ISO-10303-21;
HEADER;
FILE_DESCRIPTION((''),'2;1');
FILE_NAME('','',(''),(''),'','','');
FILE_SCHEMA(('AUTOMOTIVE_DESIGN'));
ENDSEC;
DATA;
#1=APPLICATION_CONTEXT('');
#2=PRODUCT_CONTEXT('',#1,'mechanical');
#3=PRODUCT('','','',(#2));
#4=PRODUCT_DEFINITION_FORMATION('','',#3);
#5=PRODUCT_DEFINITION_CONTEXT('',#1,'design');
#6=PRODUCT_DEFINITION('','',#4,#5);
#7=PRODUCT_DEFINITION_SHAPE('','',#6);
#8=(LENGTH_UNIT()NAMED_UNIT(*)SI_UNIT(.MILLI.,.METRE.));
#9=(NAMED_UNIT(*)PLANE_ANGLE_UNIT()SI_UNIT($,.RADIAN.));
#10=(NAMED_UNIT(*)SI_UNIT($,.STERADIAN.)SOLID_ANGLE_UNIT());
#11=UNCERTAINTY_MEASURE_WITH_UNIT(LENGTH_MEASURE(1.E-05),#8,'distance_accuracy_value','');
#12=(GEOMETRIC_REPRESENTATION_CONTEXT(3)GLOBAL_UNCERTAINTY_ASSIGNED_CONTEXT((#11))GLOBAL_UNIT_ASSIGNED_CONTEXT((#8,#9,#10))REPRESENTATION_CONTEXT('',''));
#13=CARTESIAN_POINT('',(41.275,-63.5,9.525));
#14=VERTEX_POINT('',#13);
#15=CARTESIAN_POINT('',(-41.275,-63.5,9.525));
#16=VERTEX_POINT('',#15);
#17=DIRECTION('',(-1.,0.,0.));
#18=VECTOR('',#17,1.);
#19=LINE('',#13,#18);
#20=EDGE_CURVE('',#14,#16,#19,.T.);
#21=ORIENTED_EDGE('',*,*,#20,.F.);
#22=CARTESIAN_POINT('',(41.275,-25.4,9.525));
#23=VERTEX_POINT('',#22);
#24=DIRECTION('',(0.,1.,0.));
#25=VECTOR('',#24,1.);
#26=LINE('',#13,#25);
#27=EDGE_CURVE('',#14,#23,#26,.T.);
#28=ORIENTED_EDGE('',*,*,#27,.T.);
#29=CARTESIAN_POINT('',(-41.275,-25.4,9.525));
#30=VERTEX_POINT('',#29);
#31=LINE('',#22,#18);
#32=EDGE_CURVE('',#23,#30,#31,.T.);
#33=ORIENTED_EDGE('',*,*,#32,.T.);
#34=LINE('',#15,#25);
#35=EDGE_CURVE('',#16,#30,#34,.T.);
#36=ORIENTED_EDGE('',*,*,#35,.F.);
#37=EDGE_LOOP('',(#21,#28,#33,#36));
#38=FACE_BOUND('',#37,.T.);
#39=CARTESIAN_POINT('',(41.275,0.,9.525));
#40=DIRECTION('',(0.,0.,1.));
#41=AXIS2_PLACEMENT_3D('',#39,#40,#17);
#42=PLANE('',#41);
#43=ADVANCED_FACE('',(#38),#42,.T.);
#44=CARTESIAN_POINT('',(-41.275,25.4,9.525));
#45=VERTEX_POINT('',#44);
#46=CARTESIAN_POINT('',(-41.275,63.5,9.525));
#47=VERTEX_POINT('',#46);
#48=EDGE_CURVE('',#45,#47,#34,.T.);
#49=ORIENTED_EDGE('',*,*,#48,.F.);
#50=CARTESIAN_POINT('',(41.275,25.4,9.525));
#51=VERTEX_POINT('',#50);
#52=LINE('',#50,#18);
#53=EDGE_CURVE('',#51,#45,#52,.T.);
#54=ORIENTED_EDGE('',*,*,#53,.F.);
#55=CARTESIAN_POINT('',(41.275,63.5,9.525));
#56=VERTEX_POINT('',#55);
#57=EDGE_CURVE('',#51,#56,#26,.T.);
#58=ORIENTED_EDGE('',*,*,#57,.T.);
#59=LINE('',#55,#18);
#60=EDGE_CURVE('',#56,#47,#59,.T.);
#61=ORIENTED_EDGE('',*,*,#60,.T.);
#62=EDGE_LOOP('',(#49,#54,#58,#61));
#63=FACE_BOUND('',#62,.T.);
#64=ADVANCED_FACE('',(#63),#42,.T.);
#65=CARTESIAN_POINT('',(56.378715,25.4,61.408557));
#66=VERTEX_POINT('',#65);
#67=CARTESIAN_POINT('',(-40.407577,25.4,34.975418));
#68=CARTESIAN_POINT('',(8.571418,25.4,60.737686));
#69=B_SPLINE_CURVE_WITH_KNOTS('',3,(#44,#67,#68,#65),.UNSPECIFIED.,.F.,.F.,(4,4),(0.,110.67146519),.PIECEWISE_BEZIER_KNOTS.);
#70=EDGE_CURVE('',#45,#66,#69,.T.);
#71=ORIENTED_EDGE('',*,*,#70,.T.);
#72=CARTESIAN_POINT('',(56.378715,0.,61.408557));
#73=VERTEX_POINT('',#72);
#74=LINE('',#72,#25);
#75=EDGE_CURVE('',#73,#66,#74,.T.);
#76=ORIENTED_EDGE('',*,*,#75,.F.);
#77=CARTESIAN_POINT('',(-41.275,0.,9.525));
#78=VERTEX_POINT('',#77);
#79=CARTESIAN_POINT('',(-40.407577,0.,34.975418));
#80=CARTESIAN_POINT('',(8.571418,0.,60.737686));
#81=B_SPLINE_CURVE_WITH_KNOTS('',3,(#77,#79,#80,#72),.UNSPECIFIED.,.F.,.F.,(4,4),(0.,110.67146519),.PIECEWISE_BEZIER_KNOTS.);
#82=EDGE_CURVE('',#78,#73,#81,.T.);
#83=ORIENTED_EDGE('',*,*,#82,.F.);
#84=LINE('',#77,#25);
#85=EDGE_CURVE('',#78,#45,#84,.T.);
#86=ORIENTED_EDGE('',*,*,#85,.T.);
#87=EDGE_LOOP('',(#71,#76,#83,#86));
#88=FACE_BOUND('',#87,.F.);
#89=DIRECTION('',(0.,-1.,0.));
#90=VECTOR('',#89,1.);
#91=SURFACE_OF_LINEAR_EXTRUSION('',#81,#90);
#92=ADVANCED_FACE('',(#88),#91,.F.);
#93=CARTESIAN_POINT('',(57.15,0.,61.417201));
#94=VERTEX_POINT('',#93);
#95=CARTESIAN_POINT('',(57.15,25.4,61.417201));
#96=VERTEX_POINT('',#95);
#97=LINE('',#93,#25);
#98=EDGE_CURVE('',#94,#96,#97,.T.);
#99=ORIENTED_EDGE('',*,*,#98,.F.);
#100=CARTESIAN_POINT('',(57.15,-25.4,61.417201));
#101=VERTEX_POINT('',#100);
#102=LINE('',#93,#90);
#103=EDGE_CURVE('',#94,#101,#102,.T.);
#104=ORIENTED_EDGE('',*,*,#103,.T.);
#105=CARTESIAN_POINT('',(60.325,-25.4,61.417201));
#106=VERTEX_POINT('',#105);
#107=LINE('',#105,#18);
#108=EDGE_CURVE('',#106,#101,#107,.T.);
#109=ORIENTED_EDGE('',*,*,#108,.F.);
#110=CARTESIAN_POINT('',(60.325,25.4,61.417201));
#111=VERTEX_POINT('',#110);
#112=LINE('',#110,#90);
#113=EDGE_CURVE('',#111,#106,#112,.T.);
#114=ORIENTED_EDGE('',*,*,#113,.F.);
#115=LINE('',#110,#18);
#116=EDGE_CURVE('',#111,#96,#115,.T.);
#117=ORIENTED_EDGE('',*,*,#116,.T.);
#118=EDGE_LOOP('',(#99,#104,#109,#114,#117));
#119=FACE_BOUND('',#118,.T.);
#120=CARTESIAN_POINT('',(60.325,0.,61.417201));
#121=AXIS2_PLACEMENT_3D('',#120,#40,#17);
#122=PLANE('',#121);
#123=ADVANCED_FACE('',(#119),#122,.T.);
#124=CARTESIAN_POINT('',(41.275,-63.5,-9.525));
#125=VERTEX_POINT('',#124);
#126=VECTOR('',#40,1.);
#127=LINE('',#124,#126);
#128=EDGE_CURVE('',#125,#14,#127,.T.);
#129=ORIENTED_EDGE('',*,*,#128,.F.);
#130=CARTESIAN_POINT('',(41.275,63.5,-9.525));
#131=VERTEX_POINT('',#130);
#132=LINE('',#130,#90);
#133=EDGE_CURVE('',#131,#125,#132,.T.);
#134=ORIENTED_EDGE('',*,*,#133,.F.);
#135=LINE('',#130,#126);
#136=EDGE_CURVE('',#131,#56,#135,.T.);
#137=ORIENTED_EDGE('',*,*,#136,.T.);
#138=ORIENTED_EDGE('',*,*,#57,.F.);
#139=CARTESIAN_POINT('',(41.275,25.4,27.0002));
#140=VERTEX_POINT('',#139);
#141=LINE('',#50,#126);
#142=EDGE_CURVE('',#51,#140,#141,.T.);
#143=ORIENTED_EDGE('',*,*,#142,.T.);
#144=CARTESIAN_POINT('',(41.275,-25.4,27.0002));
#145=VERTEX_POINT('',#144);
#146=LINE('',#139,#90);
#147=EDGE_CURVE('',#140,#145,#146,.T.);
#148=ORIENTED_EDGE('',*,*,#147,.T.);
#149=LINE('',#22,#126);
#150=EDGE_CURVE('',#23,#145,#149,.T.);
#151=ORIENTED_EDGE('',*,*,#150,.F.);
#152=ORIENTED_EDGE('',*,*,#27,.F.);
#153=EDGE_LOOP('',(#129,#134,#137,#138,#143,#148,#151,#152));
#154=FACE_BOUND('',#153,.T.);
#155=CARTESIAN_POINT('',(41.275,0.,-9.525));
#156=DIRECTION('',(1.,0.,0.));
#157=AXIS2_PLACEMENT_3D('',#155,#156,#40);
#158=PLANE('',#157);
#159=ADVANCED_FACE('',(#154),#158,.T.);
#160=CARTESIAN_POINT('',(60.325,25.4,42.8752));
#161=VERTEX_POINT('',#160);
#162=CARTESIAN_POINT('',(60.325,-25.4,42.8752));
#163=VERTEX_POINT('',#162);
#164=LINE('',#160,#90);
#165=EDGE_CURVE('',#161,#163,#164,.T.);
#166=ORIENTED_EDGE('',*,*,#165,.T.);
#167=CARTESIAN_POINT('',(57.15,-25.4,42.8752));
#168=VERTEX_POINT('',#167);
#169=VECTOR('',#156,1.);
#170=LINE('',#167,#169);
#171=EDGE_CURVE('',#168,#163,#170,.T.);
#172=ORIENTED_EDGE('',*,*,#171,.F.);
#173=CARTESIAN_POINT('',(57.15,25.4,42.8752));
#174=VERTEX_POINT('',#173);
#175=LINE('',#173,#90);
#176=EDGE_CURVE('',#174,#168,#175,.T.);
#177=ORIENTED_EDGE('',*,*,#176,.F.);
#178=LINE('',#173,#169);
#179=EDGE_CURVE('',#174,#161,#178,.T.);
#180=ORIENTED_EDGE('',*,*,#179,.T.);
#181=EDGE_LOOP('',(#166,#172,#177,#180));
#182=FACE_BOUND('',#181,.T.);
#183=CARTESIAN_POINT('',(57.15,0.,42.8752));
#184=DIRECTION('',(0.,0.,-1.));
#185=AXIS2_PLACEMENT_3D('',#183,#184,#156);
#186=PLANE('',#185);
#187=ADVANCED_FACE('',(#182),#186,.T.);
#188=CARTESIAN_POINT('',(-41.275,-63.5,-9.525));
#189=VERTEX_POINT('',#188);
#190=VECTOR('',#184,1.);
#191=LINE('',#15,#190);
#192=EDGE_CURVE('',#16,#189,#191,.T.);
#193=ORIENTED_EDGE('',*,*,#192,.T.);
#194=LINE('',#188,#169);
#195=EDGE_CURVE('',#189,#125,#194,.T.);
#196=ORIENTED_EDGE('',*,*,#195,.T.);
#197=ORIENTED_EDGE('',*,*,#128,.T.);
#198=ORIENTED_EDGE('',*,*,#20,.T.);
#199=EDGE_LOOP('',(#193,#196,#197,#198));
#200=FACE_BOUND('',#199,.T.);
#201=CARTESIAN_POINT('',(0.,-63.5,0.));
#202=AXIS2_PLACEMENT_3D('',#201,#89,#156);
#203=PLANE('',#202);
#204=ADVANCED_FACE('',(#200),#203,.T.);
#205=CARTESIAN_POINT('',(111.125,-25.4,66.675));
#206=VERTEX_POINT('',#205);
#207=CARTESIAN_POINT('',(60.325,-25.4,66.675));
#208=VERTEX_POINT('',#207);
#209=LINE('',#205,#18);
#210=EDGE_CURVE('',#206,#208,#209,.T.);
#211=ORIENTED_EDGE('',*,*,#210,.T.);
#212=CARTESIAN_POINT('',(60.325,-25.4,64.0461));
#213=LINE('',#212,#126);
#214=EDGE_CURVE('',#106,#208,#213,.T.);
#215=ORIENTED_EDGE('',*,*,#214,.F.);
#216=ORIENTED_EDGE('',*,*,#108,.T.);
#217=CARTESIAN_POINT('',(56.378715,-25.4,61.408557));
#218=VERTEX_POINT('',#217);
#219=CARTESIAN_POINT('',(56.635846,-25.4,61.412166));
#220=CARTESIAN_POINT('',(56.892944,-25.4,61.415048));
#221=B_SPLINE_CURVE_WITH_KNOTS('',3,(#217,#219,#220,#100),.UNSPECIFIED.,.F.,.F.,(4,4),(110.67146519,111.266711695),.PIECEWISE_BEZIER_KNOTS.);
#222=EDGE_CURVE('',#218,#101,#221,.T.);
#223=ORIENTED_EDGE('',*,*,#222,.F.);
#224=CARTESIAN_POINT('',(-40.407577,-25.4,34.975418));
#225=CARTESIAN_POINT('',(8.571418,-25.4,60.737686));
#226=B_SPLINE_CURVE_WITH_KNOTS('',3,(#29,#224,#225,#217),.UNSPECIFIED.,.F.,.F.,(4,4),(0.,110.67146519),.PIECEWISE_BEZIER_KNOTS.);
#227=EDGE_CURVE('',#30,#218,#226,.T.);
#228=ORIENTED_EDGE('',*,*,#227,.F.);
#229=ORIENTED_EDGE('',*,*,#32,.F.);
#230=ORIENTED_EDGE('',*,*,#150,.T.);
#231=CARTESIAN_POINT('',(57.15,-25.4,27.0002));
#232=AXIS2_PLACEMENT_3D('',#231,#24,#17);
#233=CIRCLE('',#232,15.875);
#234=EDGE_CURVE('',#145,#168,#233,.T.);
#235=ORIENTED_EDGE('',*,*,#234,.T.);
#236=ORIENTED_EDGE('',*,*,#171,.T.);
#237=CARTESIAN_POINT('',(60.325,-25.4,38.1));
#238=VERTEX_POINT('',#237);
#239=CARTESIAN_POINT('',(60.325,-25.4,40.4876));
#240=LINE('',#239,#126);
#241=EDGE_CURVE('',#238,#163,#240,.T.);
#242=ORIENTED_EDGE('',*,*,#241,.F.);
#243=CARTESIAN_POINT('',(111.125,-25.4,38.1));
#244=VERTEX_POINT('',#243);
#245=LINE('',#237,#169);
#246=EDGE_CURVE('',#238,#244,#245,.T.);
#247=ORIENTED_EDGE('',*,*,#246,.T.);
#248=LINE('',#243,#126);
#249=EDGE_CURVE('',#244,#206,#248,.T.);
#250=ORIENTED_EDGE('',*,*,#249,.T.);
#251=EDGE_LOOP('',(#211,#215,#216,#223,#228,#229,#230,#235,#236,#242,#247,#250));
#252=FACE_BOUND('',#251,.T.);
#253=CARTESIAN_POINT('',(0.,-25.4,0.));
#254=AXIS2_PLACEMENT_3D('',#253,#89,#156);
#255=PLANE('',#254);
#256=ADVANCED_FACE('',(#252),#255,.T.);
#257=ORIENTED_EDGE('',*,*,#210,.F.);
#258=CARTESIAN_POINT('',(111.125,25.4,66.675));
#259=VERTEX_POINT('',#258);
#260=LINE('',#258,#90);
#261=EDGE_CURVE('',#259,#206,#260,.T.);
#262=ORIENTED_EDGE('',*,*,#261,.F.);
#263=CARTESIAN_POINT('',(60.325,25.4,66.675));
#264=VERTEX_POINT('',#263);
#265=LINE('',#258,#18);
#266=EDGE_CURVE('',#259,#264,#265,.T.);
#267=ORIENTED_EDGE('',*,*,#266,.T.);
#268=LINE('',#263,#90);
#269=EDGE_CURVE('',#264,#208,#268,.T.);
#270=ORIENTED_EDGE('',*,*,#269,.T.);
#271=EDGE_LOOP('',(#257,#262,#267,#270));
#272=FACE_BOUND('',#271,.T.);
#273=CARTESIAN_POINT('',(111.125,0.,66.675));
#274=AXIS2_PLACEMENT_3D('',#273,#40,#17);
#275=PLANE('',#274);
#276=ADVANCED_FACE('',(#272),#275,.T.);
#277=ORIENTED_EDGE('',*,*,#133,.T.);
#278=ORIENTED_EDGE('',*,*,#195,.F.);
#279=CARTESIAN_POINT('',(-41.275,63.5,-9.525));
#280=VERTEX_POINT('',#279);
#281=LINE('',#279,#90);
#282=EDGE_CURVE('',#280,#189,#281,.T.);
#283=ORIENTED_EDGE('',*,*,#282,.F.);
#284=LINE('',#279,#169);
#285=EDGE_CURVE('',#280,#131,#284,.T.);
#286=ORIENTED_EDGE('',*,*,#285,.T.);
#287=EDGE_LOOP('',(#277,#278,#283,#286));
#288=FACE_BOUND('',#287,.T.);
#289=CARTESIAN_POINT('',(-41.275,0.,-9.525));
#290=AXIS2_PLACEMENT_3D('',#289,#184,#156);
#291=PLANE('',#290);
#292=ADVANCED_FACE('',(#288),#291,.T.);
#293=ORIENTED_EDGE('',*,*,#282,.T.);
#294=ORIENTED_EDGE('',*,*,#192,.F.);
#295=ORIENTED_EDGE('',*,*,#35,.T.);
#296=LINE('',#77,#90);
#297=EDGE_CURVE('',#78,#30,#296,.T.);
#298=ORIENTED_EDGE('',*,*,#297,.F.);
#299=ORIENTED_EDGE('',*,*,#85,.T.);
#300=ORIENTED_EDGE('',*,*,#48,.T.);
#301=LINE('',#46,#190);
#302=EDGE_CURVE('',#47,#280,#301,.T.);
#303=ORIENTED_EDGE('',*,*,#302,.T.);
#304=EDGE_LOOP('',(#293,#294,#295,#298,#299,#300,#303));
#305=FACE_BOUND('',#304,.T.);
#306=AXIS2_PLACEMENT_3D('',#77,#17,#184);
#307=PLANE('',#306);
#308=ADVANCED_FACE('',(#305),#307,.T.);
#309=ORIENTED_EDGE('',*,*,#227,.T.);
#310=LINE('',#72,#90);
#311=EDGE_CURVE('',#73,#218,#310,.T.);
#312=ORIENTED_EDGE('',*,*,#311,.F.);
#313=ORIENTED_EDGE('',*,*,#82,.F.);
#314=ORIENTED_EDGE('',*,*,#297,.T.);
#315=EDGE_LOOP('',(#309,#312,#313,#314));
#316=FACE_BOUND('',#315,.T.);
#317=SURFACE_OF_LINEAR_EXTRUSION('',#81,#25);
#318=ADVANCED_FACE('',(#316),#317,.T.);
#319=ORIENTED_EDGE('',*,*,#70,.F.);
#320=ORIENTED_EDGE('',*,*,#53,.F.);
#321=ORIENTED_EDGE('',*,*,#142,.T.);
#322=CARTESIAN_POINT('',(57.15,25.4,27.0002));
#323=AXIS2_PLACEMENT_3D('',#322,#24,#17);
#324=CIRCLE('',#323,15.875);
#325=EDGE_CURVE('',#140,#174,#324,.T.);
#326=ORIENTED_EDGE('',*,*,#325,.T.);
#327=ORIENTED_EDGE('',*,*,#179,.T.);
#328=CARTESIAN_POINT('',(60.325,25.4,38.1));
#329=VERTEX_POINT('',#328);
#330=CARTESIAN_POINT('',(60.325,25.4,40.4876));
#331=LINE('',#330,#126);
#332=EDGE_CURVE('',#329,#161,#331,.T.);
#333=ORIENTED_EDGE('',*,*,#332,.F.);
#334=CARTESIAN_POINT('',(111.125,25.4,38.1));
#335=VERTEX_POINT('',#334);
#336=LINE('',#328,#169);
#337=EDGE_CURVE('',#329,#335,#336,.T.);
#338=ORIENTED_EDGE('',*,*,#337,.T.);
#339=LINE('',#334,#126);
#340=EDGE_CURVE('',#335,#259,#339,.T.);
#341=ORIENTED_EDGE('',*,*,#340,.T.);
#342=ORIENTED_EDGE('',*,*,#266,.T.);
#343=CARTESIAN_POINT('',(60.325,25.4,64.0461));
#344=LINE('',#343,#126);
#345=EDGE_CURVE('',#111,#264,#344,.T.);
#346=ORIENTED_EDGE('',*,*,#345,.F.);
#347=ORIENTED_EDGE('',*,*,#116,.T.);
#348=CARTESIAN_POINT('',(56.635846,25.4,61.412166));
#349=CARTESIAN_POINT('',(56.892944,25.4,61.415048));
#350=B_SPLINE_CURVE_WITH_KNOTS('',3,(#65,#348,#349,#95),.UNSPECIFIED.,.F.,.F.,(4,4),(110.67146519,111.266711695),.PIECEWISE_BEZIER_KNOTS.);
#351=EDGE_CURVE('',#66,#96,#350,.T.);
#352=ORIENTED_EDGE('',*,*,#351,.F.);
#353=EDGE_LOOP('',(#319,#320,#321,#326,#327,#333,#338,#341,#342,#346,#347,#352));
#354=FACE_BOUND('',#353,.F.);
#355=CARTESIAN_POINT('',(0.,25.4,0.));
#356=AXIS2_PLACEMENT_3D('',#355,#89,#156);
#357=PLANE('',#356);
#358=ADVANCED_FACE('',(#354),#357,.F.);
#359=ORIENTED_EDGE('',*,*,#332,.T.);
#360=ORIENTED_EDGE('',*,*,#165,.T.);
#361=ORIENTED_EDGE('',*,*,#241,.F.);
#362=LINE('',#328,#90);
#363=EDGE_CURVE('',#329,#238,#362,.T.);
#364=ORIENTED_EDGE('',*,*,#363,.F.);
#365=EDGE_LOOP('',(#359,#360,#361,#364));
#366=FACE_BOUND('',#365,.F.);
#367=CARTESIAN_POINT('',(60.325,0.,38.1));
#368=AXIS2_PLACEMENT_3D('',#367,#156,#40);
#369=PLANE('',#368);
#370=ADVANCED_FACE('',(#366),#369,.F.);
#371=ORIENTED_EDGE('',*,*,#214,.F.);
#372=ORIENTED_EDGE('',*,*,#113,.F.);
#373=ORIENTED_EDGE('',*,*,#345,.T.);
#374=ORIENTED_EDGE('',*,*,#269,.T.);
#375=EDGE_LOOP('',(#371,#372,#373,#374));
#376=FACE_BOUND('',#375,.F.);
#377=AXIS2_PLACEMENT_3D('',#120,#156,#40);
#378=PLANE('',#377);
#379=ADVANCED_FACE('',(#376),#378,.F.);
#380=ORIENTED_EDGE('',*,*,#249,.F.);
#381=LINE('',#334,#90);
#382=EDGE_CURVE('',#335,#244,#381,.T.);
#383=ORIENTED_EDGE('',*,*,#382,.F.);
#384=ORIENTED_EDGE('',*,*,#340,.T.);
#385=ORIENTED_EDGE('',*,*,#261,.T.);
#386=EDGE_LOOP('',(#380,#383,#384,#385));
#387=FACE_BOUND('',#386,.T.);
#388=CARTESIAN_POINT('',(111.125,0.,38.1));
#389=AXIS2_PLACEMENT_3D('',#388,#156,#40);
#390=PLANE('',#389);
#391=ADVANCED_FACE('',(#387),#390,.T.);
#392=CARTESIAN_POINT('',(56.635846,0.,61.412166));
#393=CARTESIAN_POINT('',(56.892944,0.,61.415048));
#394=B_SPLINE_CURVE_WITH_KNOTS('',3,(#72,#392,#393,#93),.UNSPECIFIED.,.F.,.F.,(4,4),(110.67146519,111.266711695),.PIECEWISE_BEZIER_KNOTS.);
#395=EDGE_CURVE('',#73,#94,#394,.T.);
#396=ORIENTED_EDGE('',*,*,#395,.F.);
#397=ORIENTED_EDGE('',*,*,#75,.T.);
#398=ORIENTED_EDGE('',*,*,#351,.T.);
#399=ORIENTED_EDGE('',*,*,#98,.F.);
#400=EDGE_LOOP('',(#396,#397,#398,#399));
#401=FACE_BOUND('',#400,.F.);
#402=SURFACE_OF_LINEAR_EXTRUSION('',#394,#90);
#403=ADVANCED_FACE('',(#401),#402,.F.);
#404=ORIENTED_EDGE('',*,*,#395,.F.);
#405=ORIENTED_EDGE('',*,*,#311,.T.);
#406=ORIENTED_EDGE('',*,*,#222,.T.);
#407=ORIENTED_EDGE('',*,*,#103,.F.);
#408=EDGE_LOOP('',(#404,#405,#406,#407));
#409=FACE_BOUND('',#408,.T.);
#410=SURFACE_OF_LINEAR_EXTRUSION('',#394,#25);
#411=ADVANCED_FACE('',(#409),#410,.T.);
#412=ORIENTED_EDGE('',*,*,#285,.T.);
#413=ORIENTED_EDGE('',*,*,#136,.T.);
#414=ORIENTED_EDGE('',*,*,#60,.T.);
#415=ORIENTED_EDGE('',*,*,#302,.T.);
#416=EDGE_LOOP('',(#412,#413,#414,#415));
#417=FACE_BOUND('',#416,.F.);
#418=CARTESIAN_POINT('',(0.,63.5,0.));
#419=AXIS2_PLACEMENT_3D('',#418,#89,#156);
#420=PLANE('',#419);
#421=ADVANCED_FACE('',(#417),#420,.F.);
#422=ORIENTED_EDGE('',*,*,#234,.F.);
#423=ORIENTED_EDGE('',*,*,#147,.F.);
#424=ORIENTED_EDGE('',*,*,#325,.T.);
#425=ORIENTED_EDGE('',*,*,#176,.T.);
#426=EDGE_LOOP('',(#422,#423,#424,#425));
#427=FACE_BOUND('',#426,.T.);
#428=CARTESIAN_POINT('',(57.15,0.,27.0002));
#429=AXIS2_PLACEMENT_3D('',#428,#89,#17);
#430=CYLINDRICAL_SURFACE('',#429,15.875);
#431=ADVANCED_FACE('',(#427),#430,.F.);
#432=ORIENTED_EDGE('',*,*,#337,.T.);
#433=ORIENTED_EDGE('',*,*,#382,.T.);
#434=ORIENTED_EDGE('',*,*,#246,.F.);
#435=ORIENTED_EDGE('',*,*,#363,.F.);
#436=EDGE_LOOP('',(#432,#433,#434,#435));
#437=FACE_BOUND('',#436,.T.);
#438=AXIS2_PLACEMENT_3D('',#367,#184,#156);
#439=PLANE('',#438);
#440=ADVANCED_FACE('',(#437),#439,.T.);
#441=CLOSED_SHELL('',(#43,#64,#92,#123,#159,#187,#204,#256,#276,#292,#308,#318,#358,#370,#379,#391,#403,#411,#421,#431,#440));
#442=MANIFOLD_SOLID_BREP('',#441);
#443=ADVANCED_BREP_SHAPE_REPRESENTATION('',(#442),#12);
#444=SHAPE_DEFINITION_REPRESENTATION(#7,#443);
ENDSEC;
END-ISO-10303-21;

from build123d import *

# Parameters (mm, degrees)
F1_DEPTH = 63.5
F2_DEPTH = 25.4
F0_W     = 25.4
F0_H     = 18.5420008242
F0_H_2   = 5.2577991758
F0_H_3   = 4.7752
F3_DEPTH = 25.4


with BuildPart() as f1:
    # F0 (on Front) → F1 (new body, symmetric)
    with BuildSketch(Plane.XZ):
        Polygon((-41.275, 9.525), (-41.275, -9.525), (41.275, -9.525), (41.275, 9.525), (22.7329991758, 9.525), align=None)
    extrude(amount=F1_DEPTH, both=True)

    # F0 (on Front) → F2 (join, symmetric)
    with BuildSketch(Plane.XZ):
        with BuildLine():
            Line((22.7329991758, 9.525), (41.275, 9.525))
            Line((41.275, 9.525), (41.275, 27.0002))
            ThreePointArc((41.275, 27.0002), (45.9246798487, 38.2255201513), (57.15, 42.8752))
            Line((57.15, 42.8752), (60.325, 42.8752))
            Line((60.325, 42.8752), (60.325, 61.4172008242))
            Line((60.325, 61.4172008242), (57.15, 61.4172008242))
            add(Edge.make_bspline(
                [(56.3787146856, 61.4085574833), (56.6358462416, 61.412165765), (56.8929439024, 61.4150481962), (57.15, 61.4172008242)],
                knots=[110.67146519, 110.67146519, 110.67146519, 110.67146519, 111.2667116948, 111.2667116948, 111.2667116948, 111.2667116948], degree=3))
            ThreePointArc((56.3787146856, 61.4085574833), (32.5423256581, 51.0624590215), (22.7329991758, 27.0002))
            Line((22.7329991758, 27.0002), (22.7329991758, 9.525))
        make_face()
    extrude(amount=F2_DEPTH, both=True)

    # F0 (on Front) → F3 (join, symmetric)
    with BuildSketch(Plane.XZ):
        Polygon((-41.275, 9.525), (-41.275, -9.525), (41.275, -9.525), (41.275, 9.525), (22.7329991758, 9.525), align=None)
        with BuildLine():
            add(Edge.make_bspline(
                [(-41.275, 9.525), (-40.4075770381, 34.9754176722), (8.5714183415, 60.7376861335), (56.3787146856, 61.4085574833)],
                knots=[0, 0, 0, 0, 110.67146519, 110.67146519, 110.67146519, 110.67146519], degree=3))
            Line((-41.275, 9.525), (22.7329991758, 9.525))
            Line((22.7329991758, 9.525), (22.7329991758, 27.0002))
            ThreePointArc((22.7329991758, 27.0002), (32.5423256581, 51.0624590215), (56.3787146856, 61.4085574833))
        make_face()
        with BuildLine():
            Line((22.7329991758, 9.525), (41.275, 9.525))
            Line((41.275, 9.525), (41.275, 27.0002))
            ThreePointArc((41.275, 27.0002), (45.9246798487, 38.2255201513), (57.15, 42.8752))
            Line((57.15, 42.8752), (60.325, 42.8752))
            Line((60.325, 42.8752), (60.325, 61.4172008242))
            Line((60.325, 61.4172008242), (57.15, 61.4172008242))
            add(Edge.make_bspline(
                [(56.3787146856, 61.4085574833), (56.6358462416, 61.412165765), (56.8929439024, 61.4150481962), (57.15, 61.4172008242)],
                knots=[110.67146519, 110.67146519, 110.67146519, 110.67146519, 111.2667116948, 111.2667116948, 111.2667116948, 111.2667116948], degree=3))
            ThreePointArc((56.3787146856, 61.4085574833), (32.5423256581, 51.0624590215), (22.7329991758, 27.0002))
            Line((22.7329991758, 27.0002), (22.7329991758, 9.525))
        make_face()
        with Locations((73.025, 52.1462004121)):
            Rectangle(F0_W, F0_H)
        with Locations((73.025, 64.0461004121)):
            Rectangle(F0_W, F0_H_2)
        with Locations((73.025, 40.4876)):
            Rectangle(F0_W, F0_H_3)
        Polygon((85.725, 66.675), (85.725, 61.4172008242), (85.725, 42.8752), (85.725, 38.1), (111.125, 38.1), (111.125, 66.675), align=None)
    extrude(amount=F3_DEPTH, both=True)


solid = f1.part
